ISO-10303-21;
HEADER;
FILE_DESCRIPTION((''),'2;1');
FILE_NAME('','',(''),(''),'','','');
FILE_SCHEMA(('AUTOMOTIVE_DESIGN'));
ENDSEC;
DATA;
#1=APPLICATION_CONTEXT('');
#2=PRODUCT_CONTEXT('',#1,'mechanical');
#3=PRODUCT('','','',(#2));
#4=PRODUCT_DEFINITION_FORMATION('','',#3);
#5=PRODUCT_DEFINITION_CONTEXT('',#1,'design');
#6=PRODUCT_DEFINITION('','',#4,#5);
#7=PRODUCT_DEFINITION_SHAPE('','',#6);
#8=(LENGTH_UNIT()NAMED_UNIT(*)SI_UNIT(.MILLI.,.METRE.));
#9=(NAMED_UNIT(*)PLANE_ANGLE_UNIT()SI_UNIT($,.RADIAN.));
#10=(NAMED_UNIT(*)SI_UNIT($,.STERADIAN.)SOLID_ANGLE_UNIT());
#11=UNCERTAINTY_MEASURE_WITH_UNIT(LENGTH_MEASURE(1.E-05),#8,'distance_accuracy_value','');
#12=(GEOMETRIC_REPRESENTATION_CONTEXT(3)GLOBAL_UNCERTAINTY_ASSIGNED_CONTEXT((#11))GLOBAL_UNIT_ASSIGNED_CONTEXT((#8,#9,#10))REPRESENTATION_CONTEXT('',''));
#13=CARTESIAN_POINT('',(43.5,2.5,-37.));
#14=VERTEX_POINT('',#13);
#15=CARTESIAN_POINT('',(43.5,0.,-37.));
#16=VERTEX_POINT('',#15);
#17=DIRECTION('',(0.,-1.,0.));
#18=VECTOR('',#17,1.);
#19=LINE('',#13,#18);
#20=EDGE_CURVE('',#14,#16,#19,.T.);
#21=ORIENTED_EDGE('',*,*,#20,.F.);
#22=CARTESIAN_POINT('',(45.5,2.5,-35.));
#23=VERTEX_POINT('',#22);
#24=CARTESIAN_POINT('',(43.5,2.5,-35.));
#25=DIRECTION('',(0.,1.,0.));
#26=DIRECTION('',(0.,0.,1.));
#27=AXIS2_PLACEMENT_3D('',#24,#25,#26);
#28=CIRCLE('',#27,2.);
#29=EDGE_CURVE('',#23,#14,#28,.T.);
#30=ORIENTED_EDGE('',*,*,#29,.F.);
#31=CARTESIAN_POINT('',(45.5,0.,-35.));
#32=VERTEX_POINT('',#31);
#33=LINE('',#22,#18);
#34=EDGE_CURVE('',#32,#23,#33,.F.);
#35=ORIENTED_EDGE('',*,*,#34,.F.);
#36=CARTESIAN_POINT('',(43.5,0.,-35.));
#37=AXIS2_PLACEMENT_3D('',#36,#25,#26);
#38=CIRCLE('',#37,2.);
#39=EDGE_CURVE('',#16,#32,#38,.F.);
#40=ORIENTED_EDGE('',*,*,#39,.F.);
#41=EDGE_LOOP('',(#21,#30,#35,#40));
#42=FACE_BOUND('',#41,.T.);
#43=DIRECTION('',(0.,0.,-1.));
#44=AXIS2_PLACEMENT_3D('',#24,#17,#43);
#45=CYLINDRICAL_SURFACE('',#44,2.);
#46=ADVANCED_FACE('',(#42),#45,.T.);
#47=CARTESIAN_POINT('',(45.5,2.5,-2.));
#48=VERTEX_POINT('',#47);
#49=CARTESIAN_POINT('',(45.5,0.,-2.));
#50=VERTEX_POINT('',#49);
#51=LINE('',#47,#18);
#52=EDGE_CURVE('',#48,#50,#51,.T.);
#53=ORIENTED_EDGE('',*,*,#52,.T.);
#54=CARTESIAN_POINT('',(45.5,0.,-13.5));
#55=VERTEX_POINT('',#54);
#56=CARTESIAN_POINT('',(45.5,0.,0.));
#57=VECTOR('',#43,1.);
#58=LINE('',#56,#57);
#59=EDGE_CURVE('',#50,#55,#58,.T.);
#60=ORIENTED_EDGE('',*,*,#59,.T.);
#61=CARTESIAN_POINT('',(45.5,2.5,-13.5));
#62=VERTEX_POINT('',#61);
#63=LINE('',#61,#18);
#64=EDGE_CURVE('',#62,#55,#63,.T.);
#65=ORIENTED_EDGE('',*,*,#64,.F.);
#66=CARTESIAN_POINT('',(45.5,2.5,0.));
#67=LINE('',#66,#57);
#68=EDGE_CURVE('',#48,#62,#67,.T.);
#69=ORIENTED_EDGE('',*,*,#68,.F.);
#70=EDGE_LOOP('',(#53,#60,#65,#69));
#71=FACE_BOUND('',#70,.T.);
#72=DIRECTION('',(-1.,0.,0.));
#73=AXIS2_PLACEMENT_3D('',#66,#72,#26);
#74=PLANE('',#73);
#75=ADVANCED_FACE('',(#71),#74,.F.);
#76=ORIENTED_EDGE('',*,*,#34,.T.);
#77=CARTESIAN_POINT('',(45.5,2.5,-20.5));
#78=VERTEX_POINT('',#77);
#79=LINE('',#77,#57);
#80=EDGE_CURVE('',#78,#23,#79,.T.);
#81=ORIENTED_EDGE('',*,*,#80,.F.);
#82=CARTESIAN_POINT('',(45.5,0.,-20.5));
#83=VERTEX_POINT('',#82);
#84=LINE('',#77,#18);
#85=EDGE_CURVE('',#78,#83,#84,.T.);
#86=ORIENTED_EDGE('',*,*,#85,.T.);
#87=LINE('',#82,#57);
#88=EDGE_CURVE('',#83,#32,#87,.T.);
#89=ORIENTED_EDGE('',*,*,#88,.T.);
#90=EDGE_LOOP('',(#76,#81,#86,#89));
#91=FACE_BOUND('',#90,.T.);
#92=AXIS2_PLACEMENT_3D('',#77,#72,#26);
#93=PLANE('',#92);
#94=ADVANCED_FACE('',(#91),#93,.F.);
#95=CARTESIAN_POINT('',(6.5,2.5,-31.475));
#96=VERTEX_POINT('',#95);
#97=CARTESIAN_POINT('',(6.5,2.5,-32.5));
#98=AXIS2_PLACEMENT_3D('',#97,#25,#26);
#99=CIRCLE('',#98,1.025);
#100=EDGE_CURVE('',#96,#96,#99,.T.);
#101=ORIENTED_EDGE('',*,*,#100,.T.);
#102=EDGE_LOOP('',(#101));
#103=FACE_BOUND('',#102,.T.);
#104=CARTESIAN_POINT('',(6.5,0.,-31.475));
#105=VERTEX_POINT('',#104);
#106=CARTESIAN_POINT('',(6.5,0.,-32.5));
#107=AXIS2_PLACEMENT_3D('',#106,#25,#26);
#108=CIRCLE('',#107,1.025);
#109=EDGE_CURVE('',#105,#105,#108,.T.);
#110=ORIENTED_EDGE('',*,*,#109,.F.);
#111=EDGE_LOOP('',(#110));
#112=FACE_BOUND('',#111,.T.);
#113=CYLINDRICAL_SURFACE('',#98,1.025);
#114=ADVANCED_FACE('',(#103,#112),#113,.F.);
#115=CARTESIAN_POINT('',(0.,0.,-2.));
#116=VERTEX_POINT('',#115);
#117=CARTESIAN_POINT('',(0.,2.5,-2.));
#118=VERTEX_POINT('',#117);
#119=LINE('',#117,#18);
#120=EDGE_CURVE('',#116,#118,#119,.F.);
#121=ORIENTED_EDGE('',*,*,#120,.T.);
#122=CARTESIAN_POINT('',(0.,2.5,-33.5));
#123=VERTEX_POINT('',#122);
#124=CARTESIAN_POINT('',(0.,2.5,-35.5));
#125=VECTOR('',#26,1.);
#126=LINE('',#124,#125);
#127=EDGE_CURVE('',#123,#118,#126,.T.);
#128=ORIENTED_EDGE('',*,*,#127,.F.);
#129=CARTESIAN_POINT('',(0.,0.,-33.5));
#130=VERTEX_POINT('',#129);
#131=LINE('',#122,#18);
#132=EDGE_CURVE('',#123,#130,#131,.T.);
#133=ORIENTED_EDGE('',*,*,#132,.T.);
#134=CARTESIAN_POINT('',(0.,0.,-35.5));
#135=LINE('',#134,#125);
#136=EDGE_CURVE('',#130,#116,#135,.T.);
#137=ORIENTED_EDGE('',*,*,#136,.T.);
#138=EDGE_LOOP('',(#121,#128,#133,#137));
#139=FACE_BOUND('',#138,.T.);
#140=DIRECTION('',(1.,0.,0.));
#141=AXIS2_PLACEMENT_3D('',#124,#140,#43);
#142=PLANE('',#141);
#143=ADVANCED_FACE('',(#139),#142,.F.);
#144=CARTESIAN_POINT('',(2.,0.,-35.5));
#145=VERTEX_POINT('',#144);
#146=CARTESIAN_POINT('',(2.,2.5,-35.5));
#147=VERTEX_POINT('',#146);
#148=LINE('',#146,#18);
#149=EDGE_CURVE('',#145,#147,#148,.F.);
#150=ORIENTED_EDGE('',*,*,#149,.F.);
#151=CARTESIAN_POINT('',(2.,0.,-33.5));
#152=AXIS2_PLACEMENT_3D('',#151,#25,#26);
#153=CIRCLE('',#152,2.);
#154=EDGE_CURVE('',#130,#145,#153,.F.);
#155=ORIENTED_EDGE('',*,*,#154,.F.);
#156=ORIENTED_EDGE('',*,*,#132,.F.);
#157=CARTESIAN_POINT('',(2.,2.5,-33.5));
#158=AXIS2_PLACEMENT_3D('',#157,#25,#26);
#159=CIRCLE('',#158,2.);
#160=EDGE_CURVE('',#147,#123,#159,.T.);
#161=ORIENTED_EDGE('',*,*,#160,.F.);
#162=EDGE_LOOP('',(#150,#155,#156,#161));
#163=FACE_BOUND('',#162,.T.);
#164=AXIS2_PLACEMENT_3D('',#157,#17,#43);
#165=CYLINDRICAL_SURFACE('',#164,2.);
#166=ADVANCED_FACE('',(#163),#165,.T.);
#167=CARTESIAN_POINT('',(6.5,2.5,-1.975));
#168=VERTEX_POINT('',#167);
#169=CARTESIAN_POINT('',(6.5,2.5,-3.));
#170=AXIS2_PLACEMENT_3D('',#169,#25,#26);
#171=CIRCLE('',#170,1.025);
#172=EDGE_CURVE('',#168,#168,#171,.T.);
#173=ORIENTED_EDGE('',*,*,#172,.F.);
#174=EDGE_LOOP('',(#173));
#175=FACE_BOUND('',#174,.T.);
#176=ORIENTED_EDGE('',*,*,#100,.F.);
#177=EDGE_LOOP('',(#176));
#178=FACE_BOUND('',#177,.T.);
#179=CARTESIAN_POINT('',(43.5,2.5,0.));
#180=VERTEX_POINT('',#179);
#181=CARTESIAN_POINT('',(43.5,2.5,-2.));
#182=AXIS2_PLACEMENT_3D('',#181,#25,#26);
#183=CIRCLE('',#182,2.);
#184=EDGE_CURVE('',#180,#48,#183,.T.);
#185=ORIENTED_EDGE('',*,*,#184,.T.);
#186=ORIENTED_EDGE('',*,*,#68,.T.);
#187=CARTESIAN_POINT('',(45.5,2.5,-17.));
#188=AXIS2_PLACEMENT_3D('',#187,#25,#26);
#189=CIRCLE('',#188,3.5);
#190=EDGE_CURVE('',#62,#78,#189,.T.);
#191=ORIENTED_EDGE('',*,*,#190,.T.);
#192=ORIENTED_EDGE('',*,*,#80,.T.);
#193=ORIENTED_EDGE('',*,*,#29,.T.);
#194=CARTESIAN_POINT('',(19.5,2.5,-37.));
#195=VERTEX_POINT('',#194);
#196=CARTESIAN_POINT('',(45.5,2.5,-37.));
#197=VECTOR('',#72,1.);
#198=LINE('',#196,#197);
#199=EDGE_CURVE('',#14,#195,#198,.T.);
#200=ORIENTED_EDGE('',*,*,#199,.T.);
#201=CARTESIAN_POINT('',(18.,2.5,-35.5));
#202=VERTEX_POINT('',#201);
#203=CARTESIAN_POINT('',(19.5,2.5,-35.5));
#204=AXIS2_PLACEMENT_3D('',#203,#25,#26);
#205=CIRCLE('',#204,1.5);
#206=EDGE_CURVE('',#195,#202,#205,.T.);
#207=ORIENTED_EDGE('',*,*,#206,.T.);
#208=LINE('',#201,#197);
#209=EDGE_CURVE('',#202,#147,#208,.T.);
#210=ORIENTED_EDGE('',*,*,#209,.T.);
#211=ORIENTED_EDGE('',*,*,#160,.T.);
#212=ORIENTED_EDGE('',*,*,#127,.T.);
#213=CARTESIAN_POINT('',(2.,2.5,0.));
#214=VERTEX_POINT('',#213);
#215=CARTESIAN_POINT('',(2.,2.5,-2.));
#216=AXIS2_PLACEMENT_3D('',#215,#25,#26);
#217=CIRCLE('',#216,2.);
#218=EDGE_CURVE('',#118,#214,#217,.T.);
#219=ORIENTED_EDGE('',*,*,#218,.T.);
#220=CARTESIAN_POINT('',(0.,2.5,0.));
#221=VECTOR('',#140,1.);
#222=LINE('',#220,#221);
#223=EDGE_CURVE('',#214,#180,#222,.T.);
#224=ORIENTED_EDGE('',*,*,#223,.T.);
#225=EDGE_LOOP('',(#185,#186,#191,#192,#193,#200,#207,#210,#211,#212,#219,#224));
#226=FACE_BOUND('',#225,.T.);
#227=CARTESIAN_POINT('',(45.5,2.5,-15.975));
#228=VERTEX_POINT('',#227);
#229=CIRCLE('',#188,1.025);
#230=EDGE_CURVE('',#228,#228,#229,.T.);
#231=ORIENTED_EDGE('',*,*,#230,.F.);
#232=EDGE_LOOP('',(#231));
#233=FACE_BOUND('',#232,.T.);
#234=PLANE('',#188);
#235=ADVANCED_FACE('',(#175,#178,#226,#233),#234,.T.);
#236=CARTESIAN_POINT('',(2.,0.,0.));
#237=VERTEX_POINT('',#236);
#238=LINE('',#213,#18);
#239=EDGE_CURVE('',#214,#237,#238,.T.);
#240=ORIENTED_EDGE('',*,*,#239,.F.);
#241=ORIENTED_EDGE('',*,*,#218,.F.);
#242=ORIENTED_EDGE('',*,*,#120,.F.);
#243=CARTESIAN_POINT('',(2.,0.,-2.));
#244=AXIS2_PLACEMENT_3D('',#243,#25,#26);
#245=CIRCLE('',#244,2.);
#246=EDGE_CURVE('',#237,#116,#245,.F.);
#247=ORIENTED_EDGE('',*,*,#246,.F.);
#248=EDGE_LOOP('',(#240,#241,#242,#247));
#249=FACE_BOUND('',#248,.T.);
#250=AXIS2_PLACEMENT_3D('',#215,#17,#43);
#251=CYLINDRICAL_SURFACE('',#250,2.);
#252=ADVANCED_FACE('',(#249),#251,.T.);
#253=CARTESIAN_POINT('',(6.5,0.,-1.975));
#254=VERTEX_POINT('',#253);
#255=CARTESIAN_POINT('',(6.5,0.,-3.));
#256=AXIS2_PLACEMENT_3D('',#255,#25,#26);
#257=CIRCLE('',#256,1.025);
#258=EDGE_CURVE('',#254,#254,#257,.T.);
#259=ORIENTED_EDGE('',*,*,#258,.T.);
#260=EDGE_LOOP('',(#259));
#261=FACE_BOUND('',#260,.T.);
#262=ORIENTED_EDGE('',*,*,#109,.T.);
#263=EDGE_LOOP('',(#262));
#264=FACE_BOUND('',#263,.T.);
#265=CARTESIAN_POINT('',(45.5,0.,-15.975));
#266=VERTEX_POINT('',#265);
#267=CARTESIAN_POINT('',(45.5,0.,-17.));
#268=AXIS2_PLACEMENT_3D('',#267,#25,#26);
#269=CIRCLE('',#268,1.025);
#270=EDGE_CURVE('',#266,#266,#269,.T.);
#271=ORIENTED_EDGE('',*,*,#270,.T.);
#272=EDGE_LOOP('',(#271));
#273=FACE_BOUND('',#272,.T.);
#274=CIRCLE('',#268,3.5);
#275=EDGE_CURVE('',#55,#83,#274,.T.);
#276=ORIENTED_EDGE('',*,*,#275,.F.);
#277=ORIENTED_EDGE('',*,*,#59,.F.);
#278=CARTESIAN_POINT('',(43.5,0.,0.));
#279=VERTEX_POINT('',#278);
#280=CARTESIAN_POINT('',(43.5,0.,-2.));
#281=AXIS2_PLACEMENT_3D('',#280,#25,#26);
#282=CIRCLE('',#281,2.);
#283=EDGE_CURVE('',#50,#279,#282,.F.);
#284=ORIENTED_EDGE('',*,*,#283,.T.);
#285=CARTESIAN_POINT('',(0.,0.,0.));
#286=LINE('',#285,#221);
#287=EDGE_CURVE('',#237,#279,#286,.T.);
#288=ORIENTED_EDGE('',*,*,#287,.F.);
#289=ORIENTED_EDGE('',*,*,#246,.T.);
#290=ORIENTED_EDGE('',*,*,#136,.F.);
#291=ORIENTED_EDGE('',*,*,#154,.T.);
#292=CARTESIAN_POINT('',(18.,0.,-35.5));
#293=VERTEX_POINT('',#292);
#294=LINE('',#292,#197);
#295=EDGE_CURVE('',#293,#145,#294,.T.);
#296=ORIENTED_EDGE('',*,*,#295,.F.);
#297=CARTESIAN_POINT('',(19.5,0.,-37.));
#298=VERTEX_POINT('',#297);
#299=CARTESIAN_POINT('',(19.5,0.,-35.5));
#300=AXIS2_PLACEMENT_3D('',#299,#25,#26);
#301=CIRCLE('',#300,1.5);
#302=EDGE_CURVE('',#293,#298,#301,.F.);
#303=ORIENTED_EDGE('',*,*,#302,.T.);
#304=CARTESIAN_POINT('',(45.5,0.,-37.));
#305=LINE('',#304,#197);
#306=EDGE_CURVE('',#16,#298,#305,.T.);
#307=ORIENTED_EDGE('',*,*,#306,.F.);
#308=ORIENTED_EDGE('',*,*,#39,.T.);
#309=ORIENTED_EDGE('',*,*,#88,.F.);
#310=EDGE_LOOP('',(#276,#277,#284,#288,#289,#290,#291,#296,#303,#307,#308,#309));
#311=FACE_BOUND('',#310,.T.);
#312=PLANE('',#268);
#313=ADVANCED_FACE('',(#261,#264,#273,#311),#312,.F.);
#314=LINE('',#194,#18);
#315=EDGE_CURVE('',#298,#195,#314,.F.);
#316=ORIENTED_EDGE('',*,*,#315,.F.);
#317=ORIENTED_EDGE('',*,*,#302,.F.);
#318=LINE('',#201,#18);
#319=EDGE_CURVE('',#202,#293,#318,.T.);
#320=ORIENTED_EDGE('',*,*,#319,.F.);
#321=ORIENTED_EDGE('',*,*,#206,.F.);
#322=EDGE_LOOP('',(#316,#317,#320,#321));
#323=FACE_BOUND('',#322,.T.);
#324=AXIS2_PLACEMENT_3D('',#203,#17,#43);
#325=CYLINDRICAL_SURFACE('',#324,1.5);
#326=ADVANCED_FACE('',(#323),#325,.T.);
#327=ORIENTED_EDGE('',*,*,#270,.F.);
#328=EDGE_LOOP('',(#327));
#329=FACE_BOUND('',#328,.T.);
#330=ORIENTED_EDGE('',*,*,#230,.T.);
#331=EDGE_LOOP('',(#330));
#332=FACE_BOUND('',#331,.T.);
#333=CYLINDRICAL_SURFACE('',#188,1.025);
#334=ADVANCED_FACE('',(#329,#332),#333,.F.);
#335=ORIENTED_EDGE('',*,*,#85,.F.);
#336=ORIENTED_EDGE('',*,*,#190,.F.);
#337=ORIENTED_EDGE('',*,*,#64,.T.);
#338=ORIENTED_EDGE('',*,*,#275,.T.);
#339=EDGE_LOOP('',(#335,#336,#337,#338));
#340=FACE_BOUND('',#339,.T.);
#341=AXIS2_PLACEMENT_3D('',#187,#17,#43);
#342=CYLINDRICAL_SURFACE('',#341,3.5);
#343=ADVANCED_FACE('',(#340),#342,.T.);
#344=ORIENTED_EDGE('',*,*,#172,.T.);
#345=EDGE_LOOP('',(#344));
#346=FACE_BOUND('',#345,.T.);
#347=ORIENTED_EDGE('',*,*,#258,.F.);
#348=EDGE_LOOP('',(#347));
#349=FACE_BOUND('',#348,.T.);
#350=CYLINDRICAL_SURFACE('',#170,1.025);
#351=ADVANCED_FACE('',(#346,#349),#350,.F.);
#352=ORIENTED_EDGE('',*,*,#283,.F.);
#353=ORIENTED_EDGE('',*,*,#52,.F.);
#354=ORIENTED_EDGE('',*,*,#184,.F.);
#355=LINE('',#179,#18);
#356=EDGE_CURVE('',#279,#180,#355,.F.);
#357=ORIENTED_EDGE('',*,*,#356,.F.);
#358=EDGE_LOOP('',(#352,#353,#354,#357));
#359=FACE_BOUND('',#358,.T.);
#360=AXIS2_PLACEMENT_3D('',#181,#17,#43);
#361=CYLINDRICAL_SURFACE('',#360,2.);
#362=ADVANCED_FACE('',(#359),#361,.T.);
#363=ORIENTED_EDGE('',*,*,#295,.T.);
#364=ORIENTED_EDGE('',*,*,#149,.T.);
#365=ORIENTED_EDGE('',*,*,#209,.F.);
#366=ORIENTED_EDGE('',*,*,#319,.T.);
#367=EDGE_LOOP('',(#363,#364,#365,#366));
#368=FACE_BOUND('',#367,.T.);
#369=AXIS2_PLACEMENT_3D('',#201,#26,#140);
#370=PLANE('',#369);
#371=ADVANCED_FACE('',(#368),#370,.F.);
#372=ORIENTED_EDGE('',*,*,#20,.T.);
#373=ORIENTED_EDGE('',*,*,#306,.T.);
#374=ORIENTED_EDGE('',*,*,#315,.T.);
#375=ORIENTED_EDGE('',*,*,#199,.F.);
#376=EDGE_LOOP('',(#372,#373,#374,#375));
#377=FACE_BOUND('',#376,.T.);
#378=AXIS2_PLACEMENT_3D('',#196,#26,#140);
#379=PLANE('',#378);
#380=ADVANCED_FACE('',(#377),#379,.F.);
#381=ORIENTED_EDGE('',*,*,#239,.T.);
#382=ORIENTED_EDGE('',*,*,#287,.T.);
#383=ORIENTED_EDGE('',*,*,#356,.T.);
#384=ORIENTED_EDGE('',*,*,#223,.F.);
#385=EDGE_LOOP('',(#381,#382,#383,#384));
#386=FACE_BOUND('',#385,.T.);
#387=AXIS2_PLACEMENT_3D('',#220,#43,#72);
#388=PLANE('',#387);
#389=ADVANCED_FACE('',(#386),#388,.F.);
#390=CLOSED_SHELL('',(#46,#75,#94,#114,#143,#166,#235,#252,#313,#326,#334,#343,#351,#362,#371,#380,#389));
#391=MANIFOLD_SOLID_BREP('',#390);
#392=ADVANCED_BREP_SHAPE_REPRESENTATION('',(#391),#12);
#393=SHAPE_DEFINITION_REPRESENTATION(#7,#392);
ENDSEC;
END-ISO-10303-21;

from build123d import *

# Parameters (mm, degrees)
SKETCH1_R                = 0.5
BOSS_EXTRUDE1_DEPTH      = 2.5
FILLET1_R                = 2
FILLET2_R                = 1.5
M2_5X0_45_TAPPED_HOLE1_D = 2.05


with BuildPart() as part:
    # Sketch1 → Boss-Extrude1 (new body)
    with BuildSketch(Plane(origin=(0, 0, 0), x_dir=(1, 0, 0), z_dir=(0, 1, 0))):
        with BuildLine():
            Line((0, 0), (45.5, 0))
            Line((45.5, 0), (45.5, 13.5))
            ThreePointArc((45.5, 13.5), (49, 17), (45.5, 20.5))
            Line((45.5, 20.5), (45.5, 37))
            Line((45.5, 37), (18, 37))
            Line((18, 37), (18, 35.5))
            Line((18, 35.5), (0, 35.5))
            Line((0, 35.5), (0, 0))
        make_face()
        with Locations(Location((45.5, 17, 0), (0, 0, 270))):
            Circle(SKETCH1_R, mode=Mode.SUBTRACT)
        with Locations(Location((6.5, 3, 0), (0, 0, 270))):
            Circle(SKETCH1_R, mode=Mode.SUBTRACT)
        with Locations(Location((6.5, 32.5, 0), (0, 0, 270))):
            Circle(SKETCH1_R, mode=Mode.SUBTRACT)
    extrude(amount=BOSS_EXTRUDE1_DEPTH)

    # Fillet1
    fillet1_edges = [part.edges().sort_by_distance(p)[0] for p in [
        (0, 1.25, -35.5),
        (45.5, 1.25, -37),
        (45.5, 1.25, 0),
        (0, 1.25, 0),
    ]]
    fillet(fillet1_edges, radius=FILLET1_R)

    # Fillet2
    fillet2_edges = [part.edges().sort_by_distance(p)[0] for p in [
        (18, 1.25, -37),
    ]]
    fillet(fillet2_edges, radius=FILLET2_R - 0.0001)  # a hair under: the kernel refuses the full size

    # M2.5x0.45 Tapped Hole1 (through all)
    with Locations(Plane(origin=(0, 2.5, 0), x_dir=(1, 0, 0), z_dir=(0, 1, 0))):
        with Locations((6.5, 32.5), (6.5, 3), (45.5, 17)):
            Hole(M2_5X0_45_TAPPED_HOLE1_D / 2)


solid = part.part
